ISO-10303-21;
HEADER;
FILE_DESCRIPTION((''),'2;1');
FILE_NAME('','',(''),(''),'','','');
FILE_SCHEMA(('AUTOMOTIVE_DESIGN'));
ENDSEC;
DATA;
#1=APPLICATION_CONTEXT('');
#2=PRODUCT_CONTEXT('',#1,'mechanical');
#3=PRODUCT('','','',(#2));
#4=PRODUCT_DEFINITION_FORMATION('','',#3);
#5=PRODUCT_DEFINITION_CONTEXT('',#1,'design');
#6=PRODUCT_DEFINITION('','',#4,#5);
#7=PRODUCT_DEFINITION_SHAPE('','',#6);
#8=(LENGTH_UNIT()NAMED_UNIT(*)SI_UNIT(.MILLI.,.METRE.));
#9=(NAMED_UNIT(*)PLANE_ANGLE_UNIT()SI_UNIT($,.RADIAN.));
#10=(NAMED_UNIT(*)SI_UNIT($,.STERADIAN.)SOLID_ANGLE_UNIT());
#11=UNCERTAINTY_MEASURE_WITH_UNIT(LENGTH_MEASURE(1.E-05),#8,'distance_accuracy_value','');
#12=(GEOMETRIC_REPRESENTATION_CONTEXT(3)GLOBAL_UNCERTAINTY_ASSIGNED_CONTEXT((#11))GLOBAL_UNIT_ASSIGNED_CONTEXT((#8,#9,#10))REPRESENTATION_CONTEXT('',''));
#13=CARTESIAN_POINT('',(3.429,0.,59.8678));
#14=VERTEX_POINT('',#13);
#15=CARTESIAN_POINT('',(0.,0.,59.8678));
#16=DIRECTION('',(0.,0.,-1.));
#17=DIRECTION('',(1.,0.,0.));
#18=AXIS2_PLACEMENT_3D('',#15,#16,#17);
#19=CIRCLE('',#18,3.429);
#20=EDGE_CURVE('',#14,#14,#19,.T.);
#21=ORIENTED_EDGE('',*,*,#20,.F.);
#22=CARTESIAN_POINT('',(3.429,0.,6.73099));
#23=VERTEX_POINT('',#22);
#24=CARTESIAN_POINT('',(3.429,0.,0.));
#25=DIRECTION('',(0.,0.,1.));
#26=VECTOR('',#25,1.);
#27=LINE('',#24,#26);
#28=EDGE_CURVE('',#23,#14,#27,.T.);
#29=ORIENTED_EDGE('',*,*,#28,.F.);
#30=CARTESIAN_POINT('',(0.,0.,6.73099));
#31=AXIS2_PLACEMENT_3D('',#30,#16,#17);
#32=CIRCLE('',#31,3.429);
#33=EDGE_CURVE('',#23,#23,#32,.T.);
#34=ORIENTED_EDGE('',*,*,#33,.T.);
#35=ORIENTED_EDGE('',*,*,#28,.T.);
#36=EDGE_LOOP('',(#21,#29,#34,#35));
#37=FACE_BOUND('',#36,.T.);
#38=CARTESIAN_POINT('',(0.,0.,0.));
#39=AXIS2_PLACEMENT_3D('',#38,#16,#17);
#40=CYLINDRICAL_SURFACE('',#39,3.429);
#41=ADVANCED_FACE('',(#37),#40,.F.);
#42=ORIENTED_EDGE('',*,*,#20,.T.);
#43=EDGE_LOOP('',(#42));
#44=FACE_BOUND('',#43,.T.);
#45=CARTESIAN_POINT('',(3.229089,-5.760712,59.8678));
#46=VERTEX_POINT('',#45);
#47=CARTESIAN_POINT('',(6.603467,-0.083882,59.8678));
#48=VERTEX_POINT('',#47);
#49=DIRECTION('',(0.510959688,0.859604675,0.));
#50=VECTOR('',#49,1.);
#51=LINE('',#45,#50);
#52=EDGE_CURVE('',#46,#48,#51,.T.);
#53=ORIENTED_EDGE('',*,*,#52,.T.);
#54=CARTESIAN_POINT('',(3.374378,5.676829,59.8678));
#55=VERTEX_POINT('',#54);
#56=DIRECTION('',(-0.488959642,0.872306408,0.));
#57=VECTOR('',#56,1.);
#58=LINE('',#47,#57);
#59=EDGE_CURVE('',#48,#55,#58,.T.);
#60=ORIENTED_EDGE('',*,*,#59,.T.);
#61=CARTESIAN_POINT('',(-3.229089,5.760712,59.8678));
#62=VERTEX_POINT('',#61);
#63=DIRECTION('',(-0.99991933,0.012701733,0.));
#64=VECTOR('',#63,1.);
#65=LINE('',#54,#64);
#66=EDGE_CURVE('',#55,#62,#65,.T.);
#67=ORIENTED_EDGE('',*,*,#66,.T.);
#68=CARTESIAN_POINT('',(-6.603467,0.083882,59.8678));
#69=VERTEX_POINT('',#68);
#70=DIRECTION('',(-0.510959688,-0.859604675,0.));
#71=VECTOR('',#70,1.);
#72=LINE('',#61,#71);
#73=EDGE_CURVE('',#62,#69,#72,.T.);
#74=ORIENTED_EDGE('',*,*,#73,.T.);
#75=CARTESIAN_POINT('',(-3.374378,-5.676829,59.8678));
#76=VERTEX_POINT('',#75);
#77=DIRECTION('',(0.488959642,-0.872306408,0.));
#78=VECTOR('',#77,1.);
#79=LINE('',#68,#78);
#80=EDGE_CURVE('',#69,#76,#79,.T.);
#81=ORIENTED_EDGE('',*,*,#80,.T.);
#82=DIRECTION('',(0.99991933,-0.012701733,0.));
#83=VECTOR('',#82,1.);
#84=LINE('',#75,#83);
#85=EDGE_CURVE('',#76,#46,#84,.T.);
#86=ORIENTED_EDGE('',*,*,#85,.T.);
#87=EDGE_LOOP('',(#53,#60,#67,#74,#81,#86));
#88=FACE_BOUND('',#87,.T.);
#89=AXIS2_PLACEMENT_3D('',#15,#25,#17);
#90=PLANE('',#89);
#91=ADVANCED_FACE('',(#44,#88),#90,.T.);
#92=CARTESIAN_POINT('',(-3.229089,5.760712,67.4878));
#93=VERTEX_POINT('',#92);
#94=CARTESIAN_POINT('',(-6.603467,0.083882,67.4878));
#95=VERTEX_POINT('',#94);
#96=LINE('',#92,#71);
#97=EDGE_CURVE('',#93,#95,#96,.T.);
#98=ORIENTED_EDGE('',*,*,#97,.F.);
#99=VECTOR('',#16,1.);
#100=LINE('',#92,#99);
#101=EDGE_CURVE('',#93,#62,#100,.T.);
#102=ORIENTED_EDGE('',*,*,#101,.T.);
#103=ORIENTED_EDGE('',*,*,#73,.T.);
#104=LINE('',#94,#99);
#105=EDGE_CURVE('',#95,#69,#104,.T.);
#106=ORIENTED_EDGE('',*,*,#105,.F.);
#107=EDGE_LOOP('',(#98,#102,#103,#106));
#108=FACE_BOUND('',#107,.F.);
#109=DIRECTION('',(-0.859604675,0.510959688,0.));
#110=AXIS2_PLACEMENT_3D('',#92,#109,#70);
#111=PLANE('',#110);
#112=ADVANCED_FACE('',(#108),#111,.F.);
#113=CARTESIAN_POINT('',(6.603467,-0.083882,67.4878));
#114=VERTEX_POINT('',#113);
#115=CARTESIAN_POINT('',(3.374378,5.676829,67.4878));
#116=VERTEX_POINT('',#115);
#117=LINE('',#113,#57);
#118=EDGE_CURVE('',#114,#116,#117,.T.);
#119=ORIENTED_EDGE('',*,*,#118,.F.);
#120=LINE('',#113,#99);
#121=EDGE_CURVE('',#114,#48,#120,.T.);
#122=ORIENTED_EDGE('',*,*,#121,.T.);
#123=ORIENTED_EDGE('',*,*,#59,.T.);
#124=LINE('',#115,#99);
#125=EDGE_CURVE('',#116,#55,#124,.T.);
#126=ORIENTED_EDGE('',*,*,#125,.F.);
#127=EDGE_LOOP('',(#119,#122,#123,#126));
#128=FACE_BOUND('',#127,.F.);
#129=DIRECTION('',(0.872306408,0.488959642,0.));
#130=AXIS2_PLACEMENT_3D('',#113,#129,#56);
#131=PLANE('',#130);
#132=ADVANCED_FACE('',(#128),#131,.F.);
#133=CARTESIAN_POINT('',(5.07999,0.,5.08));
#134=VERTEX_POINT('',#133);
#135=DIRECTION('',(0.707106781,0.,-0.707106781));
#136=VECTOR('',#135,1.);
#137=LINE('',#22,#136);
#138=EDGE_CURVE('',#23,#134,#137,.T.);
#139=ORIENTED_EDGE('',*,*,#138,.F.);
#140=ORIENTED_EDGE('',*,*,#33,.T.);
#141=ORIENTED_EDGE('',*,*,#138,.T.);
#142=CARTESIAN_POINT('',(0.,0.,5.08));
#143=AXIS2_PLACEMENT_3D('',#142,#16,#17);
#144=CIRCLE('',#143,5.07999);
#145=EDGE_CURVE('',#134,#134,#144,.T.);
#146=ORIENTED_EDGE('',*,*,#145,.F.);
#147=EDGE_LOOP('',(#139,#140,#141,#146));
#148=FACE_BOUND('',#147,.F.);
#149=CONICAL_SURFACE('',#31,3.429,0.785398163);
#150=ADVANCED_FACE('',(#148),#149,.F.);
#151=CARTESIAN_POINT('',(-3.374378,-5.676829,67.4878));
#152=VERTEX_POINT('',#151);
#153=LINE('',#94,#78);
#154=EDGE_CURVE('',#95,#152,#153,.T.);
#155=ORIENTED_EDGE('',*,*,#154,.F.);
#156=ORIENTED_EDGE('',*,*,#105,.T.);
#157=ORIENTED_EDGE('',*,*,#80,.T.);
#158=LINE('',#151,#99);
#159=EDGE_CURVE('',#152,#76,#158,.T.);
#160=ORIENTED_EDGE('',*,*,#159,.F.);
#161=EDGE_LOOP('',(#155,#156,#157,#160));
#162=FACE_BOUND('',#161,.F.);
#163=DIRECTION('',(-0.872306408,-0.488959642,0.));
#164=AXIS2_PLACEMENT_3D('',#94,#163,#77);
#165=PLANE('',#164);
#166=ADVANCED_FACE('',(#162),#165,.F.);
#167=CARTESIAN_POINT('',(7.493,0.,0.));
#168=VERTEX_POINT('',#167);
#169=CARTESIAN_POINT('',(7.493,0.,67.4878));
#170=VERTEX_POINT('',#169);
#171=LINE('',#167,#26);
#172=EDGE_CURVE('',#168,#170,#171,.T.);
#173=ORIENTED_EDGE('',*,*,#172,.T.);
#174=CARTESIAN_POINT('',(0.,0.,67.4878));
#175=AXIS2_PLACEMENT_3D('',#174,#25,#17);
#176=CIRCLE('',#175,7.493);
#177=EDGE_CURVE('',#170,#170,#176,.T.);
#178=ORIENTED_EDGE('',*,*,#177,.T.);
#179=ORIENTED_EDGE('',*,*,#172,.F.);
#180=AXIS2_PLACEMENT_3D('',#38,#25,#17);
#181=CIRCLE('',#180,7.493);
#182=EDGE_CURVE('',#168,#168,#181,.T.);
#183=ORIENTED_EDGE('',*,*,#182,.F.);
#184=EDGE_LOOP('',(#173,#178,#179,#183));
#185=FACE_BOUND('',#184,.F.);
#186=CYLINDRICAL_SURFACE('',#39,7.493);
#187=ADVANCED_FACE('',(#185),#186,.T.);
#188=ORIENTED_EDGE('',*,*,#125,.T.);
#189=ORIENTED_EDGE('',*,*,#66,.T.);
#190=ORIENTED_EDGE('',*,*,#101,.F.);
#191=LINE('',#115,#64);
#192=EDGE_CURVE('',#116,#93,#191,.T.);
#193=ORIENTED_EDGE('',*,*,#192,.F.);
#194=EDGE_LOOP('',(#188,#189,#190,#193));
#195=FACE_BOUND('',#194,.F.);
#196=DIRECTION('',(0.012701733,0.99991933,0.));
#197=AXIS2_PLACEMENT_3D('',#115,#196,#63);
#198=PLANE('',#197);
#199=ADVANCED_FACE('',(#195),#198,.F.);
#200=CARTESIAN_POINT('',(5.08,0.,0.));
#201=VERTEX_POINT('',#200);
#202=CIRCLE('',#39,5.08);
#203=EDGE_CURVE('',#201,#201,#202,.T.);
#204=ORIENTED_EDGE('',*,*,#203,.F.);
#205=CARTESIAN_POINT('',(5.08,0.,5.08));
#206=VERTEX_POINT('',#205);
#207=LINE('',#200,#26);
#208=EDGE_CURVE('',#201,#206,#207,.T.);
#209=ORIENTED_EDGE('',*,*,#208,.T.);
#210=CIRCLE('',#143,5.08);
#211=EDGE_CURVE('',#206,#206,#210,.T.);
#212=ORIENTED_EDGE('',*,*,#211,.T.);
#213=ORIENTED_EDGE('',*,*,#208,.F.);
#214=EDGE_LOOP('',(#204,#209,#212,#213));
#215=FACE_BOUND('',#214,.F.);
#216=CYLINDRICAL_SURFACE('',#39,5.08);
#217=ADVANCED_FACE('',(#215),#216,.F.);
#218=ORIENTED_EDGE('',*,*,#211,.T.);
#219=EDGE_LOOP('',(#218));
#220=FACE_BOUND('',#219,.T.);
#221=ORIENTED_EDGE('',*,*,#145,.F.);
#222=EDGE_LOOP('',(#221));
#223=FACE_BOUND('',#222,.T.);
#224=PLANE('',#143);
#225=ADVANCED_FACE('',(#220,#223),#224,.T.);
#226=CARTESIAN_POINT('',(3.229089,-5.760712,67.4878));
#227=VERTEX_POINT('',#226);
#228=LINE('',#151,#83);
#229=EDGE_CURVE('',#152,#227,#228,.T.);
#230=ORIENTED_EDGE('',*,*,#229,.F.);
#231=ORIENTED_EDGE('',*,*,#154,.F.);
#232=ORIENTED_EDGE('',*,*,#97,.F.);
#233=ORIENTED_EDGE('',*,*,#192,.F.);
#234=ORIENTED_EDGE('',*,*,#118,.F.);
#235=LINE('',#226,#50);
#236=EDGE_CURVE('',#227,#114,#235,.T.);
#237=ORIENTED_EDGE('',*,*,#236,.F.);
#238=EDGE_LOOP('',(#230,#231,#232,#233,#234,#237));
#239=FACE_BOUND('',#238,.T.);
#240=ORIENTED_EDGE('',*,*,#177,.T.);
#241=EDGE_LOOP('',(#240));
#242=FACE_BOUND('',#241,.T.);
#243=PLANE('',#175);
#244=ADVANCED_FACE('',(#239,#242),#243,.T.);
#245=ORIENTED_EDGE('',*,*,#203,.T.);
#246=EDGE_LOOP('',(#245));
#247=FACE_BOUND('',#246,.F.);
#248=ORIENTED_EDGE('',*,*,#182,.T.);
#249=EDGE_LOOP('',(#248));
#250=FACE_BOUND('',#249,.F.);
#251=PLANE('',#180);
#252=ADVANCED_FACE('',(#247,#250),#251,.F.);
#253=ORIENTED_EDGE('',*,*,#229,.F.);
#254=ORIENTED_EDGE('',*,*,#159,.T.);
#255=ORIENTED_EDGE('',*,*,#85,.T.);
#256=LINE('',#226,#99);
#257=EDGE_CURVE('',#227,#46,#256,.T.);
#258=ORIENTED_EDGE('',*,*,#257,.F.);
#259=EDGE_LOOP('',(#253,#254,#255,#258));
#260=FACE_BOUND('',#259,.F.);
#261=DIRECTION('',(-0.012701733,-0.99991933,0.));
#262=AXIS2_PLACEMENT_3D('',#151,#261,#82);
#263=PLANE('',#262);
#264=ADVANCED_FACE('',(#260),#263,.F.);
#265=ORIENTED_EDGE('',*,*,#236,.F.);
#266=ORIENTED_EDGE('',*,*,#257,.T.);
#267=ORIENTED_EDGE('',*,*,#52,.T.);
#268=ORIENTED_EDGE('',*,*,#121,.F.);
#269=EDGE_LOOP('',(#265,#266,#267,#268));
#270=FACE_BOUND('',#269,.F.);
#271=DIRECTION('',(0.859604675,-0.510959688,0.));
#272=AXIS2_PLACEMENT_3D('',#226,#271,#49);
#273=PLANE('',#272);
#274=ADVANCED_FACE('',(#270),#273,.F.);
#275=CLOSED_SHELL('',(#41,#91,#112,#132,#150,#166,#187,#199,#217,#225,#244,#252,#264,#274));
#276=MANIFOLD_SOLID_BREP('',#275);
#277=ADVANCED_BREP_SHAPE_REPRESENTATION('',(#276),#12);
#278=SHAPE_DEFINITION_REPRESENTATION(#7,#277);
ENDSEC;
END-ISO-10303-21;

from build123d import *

# Parameters (mm, degrees)
F0_R     = 7.493
F0_R_2   = 5.08
F0_R_3   = 3.429
F1_DEPTH = 67.4878
F2_R     = 5.08
F2_R_2   = 3.429
F3_DEPTH = 5.08
F4_SIZE  = 1.65099
F5_R     = 3.429
F6_DEPTH = 7.62


# Not quite as in the source:
# - a fillet or chamfer is up to 0.001 mm smaller than in the source, because OpenCascade refuses the exact size


with BuildPart() as f1:
    # F0 (on Top) → F1 (new body)
    with BuildSketch(Plane.XY):
        Circle(F0_R)
        Circle(F0_R_2, mode=Mode.SUBTRACT)
        Circle(F0_R_2)
        Circle(F0_R_3, mode=Mode.SUBTRACT)
    extrude(amount=F1_DEPTH)

    # F2 (on face) → F3 (cut)
    with BuildSketch(Plane(origin=(0, 0, 0), x_dir=(1, 0, 0), z_dir=(0, 0, -1))):
        Circle(F2_R)
        Circle(F2_R_2, mode=Mode.SUBTRACT)
    extrude(amount=-F3_DEPTH, mode=Mode.SUBTRACT)

    # F4 (size 1.651 in the source; OpenCascade refuses exactly that, so slightly less here)
    f4_edges = [f1.edges().sort_by_distance(p)[0] for p in [
        (-3.429, 0, 5.08),
    ]]
    chamfer(f4_edges, length=F4_SIZE)

    # F5 (on face) → F6 (cut)
    with BuildSketch(Plane.XY.offset(67.4878)):
        Polygon((6.6034672536, -0.0838822432), (3.3743777803, 5.6768292731), (-3.2290894733, 5.7607115163), (-6.6034672536, 0.0838822432), (-3.3743777803, -5.6768292731), (3.2290894733, -5.7607115163), align=None)
        Circle(F5_R, mode=Mode.SUBTRACT)
        Circle(F5_R)
    extrude(amount=-F6_DEPTH, mode=Mode.SUBTRACT)


solid = f1.part
